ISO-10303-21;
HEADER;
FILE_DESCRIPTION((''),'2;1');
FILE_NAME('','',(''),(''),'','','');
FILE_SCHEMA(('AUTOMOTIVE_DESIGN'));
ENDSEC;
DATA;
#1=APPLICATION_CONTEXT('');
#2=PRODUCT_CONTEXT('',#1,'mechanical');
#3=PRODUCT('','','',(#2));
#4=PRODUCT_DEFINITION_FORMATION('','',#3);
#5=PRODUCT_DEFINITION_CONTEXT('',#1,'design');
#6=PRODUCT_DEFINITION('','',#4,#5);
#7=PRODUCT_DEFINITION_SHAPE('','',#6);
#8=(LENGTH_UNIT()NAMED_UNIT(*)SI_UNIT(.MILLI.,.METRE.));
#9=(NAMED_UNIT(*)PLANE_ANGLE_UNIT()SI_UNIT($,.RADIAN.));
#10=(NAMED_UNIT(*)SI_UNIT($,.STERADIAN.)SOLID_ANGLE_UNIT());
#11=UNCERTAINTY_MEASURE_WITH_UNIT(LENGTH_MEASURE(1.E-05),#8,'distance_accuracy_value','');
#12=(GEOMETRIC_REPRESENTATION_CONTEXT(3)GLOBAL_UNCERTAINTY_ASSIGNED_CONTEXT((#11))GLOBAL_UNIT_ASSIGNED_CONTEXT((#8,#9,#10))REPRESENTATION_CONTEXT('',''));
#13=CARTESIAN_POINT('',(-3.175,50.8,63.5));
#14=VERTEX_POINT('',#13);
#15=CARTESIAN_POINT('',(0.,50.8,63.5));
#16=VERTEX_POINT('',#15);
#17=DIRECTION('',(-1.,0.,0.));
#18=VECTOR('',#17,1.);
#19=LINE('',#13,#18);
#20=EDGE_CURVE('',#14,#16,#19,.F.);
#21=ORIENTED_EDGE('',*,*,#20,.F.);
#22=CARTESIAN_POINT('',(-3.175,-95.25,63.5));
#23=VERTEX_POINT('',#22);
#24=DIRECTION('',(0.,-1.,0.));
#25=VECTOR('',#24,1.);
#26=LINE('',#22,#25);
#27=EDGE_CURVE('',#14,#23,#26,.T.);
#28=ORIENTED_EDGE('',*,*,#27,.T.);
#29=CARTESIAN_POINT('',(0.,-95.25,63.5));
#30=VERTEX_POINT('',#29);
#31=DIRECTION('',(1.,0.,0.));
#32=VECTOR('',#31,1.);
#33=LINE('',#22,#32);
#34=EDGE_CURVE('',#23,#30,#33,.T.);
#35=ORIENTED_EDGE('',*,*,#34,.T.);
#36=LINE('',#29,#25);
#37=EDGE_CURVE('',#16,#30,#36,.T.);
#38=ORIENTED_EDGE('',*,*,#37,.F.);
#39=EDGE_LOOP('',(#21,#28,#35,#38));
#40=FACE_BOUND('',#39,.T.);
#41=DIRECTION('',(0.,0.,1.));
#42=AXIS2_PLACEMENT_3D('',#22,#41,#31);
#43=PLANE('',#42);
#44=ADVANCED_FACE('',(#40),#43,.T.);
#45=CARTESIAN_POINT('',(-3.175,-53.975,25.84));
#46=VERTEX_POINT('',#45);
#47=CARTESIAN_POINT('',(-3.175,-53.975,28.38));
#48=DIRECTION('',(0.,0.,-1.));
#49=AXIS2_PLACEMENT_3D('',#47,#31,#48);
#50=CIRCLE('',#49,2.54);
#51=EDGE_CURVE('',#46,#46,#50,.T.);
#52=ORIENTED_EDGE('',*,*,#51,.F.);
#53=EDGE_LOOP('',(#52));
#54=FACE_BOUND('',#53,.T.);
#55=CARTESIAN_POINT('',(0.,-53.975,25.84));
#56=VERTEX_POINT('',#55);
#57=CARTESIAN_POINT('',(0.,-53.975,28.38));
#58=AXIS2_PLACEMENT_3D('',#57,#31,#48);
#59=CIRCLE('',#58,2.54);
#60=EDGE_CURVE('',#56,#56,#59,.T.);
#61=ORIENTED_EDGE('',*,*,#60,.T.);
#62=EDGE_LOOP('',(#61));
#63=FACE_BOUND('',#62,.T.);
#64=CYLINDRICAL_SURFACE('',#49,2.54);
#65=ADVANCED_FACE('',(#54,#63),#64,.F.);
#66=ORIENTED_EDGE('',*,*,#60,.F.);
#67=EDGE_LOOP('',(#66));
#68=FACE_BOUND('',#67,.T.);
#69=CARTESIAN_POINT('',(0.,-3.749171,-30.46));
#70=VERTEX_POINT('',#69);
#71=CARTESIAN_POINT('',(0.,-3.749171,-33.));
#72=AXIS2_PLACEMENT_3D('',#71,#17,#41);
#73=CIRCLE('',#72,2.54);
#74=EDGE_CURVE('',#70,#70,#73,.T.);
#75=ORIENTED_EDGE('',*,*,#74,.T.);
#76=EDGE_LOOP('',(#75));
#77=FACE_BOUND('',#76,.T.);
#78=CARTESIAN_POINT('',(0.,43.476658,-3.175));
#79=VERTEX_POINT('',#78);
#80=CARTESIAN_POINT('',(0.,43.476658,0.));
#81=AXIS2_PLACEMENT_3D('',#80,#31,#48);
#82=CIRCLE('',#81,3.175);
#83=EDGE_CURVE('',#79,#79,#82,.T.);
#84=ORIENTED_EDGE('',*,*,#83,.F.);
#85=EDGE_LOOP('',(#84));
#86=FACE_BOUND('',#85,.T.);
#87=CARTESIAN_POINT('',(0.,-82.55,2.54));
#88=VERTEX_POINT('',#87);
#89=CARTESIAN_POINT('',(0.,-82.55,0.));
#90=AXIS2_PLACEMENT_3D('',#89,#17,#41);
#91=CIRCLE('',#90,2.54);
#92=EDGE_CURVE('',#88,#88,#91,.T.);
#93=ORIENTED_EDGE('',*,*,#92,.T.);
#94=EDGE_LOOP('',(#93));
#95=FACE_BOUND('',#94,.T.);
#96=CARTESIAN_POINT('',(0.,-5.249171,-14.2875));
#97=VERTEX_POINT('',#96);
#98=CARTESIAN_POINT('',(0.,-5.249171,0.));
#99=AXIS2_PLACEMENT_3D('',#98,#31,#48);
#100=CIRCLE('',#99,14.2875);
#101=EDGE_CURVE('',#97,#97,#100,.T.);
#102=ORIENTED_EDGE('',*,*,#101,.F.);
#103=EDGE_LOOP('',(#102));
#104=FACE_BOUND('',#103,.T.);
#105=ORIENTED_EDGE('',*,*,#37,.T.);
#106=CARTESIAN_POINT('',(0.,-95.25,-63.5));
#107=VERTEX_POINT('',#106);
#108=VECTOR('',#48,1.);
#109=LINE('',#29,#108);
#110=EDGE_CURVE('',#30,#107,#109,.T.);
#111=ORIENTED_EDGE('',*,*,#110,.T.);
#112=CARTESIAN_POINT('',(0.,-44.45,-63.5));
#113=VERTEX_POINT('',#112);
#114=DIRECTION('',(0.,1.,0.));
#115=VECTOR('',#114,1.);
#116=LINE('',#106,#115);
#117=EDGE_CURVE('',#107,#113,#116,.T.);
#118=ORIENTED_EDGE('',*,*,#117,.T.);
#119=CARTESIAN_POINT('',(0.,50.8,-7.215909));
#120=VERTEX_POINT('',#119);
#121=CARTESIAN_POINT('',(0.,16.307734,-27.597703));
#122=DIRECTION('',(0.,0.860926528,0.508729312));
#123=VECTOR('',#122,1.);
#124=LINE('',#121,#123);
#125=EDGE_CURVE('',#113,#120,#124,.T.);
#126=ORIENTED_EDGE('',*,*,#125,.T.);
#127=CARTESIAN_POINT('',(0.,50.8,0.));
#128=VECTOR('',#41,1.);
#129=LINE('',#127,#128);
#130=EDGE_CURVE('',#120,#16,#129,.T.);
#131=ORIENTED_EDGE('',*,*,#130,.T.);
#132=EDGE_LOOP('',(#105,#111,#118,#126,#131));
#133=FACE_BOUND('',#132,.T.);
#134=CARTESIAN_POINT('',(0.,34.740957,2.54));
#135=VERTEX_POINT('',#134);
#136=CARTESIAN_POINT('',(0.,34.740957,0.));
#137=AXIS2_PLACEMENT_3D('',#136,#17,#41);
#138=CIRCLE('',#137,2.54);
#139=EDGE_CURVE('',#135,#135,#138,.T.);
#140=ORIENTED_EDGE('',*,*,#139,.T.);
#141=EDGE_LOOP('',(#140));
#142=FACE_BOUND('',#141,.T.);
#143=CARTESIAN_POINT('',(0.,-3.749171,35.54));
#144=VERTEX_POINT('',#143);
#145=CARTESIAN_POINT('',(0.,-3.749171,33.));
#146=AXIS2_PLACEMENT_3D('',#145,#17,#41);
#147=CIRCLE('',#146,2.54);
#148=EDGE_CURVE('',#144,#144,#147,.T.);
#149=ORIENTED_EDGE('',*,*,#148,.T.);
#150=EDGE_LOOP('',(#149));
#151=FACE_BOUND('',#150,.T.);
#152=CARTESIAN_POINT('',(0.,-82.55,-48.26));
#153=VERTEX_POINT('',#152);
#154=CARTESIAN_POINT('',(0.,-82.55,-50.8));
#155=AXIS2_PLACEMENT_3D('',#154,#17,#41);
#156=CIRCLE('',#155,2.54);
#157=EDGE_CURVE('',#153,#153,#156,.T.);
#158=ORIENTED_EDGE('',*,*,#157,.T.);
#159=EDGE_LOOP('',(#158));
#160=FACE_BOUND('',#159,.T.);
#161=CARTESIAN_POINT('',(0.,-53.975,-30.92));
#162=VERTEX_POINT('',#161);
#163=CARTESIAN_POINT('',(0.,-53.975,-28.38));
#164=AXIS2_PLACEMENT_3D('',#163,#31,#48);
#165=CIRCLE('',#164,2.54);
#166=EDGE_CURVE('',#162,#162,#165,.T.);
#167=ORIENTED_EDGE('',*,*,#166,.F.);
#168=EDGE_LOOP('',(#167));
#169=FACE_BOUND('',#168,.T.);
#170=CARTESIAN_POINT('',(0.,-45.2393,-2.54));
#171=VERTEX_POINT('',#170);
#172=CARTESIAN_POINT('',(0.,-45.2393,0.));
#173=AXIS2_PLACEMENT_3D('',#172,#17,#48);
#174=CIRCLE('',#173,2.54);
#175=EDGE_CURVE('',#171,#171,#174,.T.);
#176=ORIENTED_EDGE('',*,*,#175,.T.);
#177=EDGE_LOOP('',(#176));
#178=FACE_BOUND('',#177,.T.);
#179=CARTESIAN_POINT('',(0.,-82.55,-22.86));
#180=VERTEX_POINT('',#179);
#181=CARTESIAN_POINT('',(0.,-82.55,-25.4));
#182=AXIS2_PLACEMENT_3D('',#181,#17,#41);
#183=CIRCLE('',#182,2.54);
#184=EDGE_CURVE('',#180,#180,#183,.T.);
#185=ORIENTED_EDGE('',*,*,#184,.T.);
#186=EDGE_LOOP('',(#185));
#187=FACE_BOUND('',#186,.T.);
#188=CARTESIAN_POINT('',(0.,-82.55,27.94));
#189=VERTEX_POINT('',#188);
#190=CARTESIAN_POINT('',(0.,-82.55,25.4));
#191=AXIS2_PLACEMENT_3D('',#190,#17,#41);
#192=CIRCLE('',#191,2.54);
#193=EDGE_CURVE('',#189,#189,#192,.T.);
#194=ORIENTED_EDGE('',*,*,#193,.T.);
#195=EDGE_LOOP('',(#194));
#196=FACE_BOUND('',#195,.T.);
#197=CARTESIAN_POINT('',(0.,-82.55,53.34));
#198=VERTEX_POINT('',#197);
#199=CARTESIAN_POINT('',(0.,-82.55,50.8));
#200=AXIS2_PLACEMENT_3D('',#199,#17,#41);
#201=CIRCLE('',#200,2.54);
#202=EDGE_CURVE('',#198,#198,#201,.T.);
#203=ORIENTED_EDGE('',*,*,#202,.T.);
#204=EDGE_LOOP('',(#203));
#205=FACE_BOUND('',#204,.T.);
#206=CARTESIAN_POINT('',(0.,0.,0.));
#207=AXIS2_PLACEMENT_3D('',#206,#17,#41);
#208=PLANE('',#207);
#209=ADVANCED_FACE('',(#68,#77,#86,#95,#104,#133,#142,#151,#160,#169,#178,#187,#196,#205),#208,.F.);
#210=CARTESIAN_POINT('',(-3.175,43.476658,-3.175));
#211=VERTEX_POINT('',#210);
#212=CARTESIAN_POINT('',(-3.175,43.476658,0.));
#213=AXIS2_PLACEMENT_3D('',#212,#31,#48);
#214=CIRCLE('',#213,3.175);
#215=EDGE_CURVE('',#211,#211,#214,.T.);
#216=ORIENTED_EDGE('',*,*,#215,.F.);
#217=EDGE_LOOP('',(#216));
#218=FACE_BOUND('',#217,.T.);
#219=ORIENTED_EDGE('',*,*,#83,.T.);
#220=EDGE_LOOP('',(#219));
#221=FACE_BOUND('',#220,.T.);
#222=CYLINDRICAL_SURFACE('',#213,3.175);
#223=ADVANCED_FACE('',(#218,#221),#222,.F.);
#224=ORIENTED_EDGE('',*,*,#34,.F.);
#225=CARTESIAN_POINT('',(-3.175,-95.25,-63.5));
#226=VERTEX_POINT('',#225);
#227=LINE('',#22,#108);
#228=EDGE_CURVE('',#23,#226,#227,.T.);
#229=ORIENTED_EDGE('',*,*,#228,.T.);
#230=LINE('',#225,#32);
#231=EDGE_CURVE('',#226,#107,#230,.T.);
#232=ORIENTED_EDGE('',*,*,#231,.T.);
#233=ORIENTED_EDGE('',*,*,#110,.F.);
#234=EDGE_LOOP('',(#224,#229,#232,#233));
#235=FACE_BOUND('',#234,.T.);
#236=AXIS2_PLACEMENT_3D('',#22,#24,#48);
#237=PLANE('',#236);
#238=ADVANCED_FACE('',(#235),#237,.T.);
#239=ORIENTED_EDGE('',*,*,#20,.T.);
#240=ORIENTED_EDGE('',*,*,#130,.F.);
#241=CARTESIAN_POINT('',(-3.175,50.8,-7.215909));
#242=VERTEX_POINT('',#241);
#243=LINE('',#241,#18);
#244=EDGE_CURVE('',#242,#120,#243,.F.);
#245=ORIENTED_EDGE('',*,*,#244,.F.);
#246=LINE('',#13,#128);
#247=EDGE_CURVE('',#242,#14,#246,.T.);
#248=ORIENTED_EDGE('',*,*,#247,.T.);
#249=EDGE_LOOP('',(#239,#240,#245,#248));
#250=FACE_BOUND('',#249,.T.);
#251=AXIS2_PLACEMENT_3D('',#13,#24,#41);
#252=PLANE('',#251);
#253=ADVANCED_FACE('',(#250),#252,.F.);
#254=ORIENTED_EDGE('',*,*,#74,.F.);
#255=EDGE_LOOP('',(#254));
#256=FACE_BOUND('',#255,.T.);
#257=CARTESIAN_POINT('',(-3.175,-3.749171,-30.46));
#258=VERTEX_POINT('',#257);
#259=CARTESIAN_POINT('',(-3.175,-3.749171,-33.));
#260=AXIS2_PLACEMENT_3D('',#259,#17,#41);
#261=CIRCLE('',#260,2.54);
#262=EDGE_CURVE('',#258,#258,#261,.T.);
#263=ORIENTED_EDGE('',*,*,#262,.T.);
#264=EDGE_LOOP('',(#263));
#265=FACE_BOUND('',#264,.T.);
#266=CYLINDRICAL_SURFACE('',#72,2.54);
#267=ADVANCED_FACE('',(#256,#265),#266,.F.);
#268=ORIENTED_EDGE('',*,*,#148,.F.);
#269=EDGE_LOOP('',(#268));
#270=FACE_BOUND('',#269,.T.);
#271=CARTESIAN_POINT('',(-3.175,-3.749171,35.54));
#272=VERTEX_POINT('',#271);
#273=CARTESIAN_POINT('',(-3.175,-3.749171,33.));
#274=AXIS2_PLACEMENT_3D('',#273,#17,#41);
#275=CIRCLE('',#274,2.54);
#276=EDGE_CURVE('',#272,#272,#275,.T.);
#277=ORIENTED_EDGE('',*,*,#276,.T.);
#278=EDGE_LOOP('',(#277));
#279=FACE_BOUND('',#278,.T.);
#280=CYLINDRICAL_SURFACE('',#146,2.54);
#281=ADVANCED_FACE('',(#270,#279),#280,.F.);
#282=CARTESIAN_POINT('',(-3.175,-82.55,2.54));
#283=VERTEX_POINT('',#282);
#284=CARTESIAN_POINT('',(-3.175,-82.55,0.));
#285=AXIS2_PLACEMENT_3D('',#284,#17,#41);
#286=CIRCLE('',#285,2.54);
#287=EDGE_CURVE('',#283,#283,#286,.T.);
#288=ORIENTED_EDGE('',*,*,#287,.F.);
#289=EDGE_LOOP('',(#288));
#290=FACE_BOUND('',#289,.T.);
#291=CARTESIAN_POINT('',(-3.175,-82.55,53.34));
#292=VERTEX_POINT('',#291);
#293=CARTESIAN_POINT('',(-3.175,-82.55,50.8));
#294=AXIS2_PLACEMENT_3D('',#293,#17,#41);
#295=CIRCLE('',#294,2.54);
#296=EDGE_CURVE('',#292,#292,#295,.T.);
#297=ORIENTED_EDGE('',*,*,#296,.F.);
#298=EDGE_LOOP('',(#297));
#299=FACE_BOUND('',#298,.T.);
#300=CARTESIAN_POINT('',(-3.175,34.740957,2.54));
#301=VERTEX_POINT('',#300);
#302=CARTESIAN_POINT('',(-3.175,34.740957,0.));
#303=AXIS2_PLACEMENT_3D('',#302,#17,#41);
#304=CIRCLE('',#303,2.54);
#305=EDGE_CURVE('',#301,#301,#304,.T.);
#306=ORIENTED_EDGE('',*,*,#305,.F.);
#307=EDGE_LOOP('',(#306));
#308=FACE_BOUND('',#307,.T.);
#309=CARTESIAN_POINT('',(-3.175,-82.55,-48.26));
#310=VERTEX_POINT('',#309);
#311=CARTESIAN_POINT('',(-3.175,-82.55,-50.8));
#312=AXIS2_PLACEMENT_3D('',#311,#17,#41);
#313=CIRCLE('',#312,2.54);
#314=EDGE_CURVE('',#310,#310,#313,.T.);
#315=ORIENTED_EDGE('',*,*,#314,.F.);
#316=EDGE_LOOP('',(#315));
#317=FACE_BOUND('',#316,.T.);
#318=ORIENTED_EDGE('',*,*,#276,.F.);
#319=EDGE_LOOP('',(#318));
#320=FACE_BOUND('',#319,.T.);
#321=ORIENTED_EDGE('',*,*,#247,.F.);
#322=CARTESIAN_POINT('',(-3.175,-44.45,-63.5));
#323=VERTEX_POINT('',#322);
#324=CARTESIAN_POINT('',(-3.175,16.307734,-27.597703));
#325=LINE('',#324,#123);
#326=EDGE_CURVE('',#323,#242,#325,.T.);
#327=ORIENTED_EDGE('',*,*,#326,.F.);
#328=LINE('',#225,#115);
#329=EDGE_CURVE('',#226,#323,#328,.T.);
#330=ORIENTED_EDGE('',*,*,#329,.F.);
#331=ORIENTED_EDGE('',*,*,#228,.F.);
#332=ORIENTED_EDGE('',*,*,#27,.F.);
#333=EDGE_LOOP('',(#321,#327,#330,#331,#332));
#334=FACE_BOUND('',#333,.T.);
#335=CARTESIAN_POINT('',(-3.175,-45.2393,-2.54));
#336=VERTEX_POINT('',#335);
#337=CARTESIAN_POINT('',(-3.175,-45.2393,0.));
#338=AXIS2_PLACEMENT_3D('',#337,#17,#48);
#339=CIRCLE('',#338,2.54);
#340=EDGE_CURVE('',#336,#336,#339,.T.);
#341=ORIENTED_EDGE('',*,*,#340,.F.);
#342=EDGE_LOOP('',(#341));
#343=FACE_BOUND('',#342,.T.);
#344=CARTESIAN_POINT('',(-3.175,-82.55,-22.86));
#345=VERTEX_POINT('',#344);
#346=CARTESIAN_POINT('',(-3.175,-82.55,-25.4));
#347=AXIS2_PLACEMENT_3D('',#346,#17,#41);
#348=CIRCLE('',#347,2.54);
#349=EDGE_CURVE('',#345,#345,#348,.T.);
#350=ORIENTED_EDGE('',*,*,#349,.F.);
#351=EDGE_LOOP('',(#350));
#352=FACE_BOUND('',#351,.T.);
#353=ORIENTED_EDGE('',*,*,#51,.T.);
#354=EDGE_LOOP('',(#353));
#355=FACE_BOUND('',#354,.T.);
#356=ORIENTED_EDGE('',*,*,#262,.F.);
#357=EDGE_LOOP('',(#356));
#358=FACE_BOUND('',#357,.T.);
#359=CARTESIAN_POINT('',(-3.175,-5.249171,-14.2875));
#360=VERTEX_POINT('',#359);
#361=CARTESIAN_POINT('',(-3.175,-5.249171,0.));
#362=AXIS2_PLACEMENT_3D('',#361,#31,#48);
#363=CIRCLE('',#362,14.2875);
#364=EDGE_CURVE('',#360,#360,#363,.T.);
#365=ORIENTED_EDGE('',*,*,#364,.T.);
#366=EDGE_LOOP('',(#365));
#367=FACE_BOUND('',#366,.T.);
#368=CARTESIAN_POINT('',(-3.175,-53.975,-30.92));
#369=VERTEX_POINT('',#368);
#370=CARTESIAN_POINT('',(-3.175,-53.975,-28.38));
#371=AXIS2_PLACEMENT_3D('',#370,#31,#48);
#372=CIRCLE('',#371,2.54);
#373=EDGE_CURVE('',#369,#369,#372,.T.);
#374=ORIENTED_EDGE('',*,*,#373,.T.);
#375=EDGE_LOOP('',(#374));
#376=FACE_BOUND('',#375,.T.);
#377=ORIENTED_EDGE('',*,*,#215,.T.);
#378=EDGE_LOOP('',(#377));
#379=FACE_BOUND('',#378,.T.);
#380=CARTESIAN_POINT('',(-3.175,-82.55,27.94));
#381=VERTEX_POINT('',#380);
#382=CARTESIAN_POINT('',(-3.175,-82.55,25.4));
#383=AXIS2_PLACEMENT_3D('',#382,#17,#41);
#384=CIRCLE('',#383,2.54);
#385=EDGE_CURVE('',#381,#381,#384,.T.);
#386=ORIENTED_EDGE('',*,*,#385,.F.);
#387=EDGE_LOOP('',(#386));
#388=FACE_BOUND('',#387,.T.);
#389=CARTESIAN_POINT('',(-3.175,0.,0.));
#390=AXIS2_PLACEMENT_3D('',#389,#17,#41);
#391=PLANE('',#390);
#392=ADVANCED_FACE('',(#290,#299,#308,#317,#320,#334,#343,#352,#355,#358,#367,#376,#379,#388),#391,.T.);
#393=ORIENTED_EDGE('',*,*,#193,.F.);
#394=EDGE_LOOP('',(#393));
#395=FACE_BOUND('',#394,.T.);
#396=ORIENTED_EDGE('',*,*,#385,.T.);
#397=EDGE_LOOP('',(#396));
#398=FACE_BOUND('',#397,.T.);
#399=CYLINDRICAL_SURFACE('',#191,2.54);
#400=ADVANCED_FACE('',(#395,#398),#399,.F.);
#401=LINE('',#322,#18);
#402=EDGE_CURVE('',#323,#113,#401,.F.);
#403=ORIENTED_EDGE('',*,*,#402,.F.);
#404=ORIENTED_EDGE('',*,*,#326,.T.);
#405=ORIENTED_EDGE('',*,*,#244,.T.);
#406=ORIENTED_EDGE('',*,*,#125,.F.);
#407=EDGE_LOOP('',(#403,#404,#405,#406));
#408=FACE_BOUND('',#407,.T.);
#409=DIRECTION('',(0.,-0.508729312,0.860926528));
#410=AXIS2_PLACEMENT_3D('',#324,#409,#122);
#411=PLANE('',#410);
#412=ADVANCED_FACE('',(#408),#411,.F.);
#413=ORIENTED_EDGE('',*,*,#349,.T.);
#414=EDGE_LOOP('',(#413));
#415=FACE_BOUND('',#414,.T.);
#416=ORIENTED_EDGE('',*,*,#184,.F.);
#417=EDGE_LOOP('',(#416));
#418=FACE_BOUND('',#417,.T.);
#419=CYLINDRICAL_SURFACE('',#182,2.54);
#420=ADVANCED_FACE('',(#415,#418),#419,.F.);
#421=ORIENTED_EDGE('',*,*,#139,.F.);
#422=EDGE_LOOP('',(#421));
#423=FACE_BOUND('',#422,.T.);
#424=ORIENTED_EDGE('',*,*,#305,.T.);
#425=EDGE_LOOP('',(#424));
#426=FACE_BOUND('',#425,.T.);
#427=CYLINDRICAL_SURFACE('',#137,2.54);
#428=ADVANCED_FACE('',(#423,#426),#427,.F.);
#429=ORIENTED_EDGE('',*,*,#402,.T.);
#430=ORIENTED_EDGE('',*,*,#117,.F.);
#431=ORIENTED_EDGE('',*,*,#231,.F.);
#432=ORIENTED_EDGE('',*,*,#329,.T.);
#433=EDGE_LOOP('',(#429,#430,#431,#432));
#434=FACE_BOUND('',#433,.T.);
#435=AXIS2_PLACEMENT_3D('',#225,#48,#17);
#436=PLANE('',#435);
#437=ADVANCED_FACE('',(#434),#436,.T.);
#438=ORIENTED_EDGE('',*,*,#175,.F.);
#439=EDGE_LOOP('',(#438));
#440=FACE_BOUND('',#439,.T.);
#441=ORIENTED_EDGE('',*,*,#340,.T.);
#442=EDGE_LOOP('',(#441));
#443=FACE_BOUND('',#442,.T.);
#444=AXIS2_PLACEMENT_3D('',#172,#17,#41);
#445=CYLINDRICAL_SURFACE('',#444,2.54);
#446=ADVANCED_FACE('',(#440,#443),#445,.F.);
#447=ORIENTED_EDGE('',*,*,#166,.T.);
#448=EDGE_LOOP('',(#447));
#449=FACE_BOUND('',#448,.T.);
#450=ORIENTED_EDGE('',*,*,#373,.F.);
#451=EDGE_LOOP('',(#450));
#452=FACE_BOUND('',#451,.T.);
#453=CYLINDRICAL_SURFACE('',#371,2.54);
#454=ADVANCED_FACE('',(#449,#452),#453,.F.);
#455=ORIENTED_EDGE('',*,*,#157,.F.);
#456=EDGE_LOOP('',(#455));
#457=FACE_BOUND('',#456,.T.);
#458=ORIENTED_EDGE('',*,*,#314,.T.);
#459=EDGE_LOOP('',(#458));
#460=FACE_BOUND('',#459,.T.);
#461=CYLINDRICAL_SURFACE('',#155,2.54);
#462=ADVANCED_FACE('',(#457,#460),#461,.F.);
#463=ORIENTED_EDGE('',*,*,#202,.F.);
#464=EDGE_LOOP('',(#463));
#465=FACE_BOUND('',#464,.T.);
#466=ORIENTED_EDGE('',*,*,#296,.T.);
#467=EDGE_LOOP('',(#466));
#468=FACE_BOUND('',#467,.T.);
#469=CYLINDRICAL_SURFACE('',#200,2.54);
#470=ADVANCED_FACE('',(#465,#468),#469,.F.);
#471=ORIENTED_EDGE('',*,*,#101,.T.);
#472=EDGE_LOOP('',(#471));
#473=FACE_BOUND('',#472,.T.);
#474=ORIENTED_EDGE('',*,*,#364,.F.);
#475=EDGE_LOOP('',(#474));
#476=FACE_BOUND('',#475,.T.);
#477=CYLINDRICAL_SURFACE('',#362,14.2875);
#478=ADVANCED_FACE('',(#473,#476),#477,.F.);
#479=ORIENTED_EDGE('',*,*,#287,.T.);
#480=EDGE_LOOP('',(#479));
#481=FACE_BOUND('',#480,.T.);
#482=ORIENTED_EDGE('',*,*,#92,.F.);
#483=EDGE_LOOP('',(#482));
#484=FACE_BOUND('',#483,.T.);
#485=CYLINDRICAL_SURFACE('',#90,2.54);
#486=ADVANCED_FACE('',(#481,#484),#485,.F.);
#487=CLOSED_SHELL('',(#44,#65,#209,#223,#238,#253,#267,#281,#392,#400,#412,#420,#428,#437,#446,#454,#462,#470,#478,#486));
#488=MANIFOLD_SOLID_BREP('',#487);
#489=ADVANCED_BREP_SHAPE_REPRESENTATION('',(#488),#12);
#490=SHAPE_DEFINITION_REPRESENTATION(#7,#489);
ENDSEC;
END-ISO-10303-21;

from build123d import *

# Parameters (mm, degrees)
SKETCH1_W          = 127
SKETCH1_H          = 190.5
BASE_FLANGE1_DEPTH = 3.175
SKETCH7_R          = 2.54
SKETCH7_R_2        = 3.175
SKETCH7_R_3        = 14.2875
CUT_EXTRUDE1_DEPTH = 3.175
SKETCH10_R         = 2.54
CUT_EXTRUDE2_DEPTH = 115.52027386
CUT_EXTRUDE3_DEPTH = 115.52027386
CUT_EXTRUDE4_DEPTH = 115.52027386
SKETCH13_R         = 2.54
CUT_EXTRUDE5_DEPTH = 115.52027386


# Sheet-metal steps are written as plain solids
with BuildPart() as part:
    # Sketch1 → Base-Flange1 (new body)
    with BuildSketch(Plane(origin=(0, 0, 0), x_dir=(0, 0, -1), z_dir=(1, 0, 0))):
        Rectangle(SKETCH1_W, SKETCH1_H)
    extrude(amount=-BASE_FLANGE1_DEPTH)

    # Sketch7 → Cut-Extrude1 (cut)
    with BuildSketch(Plane(origin=(0, 0, 0), x_dir=(0, 0, -1), z_dir=(1, 0, 0))):
        with Locations((-28.380000009, -53.975)):
            Circle(SKETCH7_R)
        with Locations((28.380000009, -53.975)):
            Circle(SKETCH7_R)
        with Locations((0, 43.476657776)):
            Circle(SKETCH7_R_2)
        with Locations((0, -5.249171112)):
            Circle(SKETCH7_R_3)
    extrude(amount=-CUT_EXTRUDE1_DEPTH, mode=Mode.SUBTRACT)

    # Sketch10 → Cut-Extrude2 (cut, through all)
    with BuildSketch(Plane.ZY.offset(3.175)):
        with Locations((0, 34.740957442)):
            Circle(SKETCH10_R)
        with Locations((33.00000004, -3.749171064)):
            Circle(SKETCH10_R)
        with Locations((-33.00000004, -3.749171064)):
            Circle(SKETCH10_R)
        with Locations(Location((0, -45.239299666, 0), (0, 0, 180))):
            Circle(SKETCH10_R)
    extrude(amount=-CUT_EXTRUDE2_DEPTH, mode=Mode.SUBTRACT)

    # Sketch11 → Cut-Extrude3 (cut, through all)
    with BuildSketch(Plane.ZY.offset(3.175)):
        Polygon((-63.5, 95.25), (-63.5, -44.45), (19.05, 95.25), align=None)
    extrude(amount=-CUT_EXTRUDE3_DEPTH, mode=Mode.SUBTRACT)

    # Sketch12 → Cut-Extrude4 (cut, through all)
    with BuildSketch(Plane.ZY.offset(3.175)):
        Polygon((63.5, 50.8), (-7.215909091, 50.8), (19.05, 95.25), (63.5, 95.25), align=None)
    extrude(amount=-CUT_EXTRUDE4_DEPTH, mode=Mode.SUBTRACT)

    # Sketch13 → Cut-Extrude5 (cut, through all)
    with BuildSketch(Plane.ZY.offset(3.175)):
        with Locations((-50.8, -82.55)):
            Circle(SKETCH13_R)
        with Locations((0, -82.55)):
            Circle(SKETCH13_R)
        with Locations((50.8, -82.55)):
            Circle(SKETCH13_R)
        with Locations((-25.4, -82.55)):
            Circle(SKETCH13_R)
        with Locations((25.4, -82.55)):
            Circle(SKETCH13_R)
    extrude(amount=-CUT_EXTRUDE5_DEPTH, mode=Mode.SUBTRACT)


solid = part.part
